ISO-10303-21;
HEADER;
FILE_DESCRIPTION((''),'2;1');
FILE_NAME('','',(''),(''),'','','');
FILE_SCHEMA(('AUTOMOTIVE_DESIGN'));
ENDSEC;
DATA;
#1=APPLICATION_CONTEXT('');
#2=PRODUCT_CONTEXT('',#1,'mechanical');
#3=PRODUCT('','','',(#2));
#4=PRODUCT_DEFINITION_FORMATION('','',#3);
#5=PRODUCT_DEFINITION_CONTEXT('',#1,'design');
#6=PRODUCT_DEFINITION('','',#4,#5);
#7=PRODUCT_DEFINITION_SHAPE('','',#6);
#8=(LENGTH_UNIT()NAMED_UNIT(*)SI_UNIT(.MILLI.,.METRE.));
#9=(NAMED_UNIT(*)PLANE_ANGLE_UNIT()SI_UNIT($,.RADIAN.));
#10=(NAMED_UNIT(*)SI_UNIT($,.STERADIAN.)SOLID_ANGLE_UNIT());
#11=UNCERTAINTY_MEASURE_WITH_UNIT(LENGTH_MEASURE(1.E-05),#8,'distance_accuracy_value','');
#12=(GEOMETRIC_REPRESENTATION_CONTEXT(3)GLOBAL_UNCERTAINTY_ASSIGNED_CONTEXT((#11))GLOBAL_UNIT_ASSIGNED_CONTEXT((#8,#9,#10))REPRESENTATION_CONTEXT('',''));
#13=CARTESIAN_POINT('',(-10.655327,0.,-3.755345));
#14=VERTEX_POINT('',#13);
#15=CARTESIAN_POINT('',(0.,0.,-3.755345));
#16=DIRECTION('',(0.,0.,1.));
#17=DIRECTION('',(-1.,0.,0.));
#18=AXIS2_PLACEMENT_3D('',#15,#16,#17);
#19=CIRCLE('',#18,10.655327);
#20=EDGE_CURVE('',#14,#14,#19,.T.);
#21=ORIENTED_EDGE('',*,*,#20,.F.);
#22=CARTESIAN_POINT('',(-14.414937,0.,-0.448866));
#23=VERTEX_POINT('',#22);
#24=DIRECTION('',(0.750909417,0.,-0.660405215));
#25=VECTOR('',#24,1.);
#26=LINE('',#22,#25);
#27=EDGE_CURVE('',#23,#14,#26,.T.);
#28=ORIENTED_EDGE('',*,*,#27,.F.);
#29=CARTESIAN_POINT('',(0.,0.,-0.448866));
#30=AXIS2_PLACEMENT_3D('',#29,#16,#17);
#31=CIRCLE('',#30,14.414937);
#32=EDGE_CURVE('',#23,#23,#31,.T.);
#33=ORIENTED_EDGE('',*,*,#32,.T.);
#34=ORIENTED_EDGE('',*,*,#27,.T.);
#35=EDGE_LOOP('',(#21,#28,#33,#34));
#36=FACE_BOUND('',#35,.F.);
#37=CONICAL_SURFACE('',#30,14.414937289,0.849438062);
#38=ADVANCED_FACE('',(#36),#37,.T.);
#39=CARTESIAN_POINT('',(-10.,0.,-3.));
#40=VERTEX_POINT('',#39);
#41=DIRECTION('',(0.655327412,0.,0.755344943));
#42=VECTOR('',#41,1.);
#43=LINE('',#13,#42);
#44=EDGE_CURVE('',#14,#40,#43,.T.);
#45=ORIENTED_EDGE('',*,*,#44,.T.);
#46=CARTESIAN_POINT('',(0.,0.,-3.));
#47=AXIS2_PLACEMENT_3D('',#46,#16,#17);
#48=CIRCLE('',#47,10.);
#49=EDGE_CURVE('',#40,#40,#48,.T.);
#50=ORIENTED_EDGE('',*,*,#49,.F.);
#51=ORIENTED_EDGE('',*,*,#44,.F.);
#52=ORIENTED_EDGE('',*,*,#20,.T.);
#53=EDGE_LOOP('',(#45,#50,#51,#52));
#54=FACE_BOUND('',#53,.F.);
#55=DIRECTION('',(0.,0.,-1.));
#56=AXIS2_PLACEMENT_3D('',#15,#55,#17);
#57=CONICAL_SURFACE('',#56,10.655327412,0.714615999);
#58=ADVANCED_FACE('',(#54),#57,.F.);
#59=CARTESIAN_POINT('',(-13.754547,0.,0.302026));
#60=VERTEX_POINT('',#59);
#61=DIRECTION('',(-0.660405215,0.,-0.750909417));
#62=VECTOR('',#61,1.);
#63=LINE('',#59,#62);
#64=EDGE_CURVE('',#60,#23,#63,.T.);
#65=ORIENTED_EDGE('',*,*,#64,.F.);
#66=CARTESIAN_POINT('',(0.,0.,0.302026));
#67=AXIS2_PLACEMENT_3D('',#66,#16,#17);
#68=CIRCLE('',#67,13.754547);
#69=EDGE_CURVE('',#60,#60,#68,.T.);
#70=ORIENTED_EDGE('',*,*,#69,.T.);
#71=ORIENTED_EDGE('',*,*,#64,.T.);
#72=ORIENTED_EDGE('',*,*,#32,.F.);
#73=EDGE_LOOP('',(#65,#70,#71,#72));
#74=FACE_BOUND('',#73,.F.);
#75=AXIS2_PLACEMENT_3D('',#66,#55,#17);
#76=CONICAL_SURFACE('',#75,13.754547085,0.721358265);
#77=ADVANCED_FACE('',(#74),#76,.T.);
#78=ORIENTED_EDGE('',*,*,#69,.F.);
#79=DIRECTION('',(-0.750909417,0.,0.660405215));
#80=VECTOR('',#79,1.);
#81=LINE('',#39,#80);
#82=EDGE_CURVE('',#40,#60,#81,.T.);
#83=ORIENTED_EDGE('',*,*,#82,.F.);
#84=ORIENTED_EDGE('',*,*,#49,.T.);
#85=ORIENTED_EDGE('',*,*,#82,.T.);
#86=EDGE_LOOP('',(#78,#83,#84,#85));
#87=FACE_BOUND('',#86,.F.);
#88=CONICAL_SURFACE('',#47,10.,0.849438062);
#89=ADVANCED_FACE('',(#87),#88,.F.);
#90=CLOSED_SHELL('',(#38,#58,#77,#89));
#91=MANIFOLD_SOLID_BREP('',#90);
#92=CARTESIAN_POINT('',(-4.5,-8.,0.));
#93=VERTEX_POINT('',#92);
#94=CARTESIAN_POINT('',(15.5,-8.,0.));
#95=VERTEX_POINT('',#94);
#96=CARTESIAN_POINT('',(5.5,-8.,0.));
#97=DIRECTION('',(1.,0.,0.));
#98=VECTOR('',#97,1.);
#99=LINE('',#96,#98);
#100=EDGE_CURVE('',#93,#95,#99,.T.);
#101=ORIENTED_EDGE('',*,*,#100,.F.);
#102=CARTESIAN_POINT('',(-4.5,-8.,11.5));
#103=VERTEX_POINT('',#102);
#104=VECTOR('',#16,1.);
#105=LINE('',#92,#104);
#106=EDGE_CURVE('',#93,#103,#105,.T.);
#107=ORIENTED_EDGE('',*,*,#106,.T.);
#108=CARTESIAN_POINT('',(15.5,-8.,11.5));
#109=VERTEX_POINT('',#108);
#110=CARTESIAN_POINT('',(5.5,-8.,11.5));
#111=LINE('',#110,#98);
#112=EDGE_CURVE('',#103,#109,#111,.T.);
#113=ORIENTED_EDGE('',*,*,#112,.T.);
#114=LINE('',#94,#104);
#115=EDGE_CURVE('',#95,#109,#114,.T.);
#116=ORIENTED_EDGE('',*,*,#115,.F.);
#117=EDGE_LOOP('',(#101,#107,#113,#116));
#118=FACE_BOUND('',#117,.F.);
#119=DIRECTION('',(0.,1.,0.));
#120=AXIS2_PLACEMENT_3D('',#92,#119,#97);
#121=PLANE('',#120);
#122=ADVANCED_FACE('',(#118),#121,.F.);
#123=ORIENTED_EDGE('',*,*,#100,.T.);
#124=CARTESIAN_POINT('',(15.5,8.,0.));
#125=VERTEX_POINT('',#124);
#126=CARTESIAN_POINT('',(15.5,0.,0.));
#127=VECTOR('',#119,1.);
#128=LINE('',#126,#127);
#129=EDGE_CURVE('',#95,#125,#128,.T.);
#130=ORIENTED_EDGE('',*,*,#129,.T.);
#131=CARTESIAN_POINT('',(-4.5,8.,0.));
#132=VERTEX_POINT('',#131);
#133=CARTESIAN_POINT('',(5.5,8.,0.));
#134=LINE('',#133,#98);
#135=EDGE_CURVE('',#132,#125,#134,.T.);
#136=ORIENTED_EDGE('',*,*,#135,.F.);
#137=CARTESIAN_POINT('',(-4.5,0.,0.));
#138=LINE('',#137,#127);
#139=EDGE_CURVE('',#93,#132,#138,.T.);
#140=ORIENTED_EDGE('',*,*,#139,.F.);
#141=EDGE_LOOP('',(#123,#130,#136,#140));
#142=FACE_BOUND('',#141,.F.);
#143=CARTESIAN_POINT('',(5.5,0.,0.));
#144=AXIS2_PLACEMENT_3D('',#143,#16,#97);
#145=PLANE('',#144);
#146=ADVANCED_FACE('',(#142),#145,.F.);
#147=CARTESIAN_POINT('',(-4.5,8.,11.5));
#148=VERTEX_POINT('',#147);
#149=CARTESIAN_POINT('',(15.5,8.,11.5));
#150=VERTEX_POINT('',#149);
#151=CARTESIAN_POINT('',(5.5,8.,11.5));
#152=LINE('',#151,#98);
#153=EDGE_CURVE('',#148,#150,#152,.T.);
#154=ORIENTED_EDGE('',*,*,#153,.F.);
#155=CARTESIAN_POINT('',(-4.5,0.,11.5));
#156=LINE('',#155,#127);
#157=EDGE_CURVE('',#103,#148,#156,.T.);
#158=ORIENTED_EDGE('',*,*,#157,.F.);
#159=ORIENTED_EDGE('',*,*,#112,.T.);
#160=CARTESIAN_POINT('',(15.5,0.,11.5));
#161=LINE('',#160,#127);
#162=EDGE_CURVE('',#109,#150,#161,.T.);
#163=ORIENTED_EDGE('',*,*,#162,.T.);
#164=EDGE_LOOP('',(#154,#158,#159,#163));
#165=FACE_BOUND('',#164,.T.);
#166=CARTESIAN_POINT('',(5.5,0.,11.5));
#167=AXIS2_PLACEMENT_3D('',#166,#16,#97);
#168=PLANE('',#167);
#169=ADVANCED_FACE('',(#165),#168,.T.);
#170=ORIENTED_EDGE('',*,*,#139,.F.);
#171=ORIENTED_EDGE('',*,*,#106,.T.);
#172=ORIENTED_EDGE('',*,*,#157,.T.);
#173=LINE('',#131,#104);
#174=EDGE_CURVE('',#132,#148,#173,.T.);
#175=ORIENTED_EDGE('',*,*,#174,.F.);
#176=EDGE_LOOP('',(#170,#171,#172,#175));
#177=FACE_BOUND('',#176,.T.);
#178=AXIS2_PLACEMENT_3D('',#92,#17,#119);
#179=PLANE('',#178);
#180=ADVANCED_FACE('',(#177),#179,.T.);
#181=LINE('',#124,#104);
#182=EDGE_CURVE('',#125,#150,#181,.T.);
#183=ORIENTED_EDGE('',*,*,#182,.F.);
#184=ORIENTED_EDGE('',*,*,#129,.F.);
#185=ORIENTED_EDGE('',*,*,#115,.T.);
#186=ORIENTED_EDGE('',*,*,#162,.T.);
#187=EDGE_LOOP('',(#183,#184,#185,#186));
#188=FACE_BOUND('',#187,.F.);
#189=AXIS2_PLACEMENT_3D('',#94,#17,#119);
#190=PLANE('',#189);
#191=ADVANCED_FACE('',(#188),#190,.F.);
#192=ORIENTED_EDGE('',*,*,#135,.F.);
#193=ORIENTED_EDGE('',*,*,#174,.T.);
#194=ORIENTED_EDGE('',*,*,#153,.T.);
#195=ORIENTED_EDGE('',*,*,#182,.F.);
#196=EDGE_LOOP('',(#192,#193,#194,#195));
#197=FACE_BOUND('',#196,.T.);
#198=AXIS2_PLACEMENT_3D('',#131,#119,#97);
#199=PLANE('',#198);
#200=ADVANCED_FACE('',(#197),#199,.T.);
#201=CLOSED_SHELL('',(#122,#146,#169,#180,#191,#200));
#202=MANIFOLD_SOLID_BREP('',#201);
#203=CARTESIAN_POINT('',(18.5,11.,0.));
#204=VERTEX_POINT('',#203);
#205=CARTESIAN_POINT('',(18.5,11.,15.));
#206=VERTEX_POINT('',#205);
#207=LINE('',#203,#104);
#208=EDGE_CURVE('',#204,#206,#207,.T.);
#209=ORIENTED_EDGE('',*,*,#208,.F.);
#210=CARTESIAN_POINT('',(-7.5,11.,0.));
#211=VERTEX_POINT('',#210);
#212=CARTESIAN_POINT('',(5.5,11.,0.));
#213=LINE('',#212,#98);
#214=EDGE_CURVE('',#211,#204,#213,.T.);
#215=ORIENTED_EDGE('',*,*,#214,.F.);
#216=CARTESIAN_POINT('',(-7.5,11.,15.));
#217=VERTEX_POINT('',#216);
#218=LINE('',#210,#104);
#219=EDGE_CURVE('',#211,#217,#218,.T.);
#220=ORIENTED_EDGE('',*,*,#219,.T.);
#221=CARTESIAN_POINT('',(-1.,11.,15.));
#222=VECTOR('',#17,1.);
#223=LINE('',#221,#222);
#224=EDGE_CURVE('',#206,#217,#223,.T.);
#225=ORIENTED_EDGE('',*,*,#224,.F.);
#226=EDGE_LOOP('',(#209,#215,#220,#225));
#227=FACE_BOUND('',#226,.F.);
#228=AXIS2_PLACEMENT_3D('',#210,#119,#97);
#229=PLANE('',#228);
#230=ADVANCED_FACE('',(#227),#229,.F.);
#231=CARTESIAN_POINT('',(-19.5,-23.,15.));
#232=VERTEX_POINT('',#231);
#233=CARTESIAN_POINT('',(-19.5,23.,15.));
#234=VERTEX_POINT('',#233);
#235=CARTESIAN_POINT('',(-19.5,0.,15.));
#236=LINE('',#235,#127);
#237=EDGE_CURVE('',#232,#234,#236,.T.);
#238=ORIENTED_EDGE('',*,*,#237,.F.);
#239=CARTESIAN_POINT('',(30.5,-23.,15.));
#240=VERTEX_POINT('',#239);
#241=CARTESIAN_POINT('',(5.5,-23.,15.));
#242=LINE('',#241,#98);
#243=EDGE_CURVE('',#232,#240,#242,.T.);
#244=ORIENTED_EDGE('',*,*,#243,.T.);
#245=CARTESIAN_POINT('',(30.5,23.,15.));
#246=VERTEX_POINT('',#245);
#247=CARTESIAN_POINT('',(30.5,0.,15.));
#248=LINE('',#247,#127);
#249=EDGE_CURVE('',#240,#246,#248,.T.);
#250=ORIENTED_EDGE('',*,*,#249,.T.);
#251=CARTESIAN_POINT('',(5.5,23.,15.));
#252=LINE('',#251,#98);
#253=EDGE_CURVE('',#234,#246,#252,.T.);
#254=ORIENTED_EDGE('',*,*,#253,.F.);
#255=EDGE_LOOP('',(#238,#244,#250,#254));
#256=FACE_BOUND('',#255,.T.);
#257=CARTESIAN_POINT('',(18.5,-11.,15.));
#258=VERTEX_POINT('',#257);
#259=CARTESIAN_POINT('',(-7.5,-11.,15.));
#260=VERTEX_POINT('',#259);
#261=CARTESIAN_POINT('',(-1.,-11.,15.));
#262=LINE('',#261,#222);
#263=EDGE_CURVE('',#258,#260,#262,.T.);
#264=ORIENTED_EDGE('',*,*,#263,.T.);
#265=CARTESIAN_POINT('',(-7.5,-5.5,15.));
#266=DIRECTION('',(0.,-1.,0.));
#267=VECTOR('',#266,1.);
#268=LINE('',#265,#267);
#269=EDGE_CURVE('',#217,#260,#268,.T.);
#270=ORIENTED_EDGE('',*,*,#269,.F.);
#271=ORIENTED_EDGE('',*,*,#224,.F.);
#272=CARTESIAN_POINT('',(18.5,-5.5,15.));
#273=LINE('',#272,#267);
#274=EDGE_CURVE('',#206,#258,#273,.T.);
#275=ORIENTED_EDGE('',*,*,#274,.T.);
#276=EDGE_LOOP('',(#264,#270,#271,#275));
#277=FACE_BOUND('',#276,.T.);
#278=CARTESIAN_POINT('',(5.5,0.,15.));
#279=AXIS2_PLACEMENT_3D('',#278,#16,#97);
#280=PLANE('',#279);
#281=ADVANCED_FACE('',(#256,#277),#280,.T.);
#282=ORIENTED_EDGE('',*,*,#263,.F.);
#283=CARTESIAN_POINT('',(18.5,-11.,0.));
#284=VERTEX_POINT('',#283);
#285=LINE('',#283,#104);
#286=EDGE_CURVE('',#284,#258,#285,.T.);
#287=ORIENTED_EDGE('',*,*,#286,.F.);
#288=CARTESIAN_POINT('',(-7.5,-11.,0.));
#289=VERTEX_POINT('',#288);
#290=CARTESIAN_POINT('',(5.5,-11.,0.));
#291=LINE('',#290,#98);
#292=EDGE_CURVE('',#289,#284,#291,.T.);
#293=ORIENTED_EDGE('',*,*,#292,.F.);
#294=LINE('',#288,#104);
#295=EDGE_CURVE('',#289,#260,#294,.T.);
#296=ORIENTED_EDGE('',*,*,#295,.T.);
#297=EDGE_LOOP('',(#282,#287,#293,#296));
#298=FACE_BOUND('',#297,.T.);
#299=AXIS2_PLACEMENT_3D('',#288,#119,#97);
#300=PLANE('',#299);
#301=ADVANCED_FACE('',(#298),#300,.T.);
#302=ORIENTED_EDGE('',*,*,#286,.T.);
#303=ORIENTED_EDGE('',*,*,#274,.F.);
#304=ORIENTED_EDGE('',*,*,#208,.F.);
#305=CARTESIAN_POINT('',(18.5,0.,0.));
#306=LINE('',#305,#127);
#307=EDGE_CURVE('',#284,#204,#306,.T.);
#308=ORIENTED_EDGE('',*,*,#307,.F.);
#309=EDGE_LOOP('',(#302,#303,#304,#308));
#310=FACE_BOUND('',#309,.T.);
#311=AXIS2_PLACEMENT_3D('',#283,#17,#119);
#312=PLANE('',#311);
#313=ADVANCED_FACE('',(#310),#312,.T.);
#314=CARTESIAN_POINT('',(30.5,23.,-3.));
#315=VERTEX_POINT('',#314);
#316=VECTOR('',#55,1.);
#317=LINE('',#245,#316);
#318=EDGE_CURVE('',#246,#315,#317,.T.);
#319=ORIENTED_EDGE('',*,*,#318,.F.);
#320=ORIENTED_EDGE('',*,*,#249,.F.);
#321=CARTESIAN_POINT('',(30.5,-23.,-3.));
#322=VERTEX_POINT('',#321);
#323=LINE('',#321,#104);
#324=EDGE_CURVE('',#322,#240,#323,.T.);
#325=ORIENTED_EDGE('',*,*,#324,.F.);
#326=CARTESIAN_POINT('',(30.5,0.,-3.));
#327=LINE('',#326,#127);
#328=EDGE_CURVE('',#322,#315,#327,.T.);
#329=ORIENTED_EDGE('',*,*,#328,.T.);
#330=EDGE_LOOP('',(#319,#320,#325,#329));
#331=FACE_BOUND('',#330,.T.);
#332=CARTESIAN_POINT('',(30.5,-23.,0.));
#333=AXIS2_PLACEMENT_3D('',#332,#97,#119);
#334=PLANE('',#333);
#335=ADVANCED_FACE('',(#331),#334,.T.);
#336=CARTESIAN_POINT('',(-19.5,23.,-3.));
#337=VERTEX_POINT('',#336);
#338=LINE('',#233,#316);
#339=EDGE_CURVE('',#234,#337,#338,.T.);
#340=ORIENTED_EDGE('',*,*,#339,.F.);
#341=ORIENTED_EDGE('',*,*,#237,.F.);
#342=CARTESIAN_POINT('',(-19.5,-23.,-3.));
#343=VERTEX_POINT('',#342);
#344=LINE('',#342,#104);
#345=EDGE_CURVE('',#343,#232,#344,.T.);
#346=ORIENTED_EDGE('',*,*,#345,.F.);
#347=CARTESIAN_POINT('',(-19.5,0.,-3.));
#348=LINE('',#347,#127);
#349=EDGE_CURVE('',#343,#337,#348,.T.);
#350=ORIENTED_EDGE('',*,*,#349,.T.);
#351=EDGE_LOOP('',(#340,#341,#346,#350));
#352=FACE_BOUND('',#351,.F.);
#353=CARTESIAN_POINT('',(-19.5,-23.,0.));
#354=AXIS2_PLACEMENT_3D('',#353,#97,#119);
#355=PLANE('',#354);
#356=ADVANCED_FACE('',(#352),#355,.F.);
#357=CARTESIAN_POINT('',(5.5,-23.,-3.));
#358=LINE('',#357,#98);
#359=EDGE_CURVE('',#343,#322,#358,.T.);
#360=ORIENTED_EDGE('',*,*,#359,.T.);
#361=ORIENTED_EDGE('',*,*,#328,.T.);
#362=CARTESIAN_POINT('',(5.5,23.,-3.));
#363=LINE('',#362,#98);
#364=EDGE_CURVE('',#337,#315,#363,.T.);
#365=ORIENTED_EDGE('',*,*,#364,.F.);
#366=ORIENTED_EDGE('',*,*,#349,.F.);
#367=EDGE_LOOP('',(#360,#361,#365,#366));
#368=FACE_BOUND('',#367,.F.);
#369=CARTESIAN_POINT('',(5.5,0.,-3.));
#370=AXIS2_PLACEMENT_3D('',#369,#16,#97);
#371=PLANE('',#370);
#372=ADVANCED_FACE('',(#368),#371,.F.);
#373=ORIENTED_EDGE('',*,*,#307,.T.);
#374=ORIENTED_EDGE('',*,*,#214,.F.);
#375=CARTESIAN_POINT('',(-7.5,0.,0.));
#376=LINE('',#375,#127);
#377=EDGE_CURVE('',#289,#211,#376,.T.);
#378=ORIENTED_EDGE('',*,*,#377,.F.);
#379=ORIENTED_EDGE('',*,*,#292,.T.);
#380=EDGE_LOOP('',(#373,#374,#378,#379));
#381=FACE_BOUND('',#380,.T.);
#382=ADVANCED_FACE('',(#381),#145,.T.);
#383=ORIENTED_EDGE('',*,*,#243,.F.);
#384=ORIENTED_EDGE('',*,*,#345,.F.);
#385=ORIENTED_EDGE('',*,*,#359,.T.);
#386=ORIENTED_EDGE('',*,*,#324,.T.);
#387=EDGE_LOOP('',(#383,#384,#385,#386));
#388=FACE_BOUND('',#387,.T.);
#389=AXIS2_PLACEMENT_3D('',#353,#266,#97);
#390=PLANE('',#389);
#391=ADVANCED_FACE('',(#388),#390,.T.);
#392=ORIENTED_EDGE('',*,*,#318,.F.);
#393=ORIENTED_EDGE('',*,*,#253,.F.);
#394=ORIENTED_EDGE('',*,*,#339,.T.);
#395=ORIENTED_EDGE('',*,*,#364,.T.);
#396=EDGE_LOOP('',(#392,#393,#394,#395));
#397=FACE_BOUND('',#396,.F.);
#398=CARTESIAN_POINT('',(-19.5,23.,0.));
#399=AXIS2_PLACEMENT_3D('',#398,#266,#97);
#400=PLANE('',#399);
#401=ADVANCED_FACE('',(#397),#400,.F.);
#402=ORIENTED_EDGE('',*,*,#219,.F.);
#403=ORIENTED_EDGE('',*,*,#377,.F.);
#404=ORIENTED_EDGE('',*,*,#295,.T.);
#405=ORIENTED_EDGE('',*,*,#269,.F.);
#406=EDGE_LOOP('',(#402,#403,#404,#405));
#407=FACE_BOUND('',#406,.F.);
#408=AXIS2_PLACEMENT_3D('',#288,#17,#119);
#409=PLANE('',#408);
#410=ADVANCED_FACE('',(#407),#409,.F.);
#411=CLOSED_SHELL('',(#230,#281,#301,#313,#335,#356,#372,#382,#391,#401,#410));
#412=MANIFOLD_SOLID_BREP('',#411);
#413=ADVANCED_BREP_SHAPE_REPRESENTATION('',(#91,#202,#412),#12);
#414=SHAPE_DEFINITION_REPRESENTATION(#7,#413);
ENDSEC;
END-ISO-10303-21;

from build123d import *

# Parameters (mm, degrees)
F2_W          = 20
F2_H          = 16
F3_DEPTH      = 11.5
F4_W          = 50
F4_H          = 46
F4_W_2        = 26
F4_H_2        = 22
F5_DEPTH      = 15
F5_DEPTH_BACK = 3
F6_DEPTH      = 25


with BuildPart() as f1:
    # F0 (on Front) → F1 (revolve)
    with BuildSketch(Plane.XZ):
        Polygon((-10.6553274116, -3.7553449435), (-10, -3), (-13.7545470851, 0.3020260729), (-14.4149372893, -0.4488662767), align=None)
    revolve(axis=Axis((0, 0, 14.246087247), (0, 0, 1)))


with BuildPart() as f3:
    # F2 (on Top) → F3 (new body)
    with BuildSketch(Plane.XY):
        with Locations((5.5, 0)):
            Rectangle(F2_W, F2_H)
    extrude(amount=F3_DEPTH)


with BuildPart() as f5:
    # F4 (on Top) → F5 (new body, two sides)
    with BuildSketch(Plane.XY) as f5_sk:
        with Locations((5.5, 0)):
            Rectangle(F4_W, F4_H)
        with Locations((5.5, 0)):
            Rectangle(F4_W_2, F4_H_2, mode=Mode.SUBTRACT)
        with Locations((5.5, 0)):
            Rectangle(F4_W_2, F4_H_2)
    extrude(amount=F5_DEPTH)
    extrude(f5_sk.sketch, amount=-F5_DEPTH_BACK)

    # F4 (on Top) → F6 (cut)
    with BuildSketch(Plane.XY):
        with Locations((5.5, 0)):
            Rectangle(F4_W_2, F4_H_2)
    extrude(amount=F6_DEPTH, mode=Mode.SUBTRACT)


solid = Compound([f1.part, f3.part, f5.part])
